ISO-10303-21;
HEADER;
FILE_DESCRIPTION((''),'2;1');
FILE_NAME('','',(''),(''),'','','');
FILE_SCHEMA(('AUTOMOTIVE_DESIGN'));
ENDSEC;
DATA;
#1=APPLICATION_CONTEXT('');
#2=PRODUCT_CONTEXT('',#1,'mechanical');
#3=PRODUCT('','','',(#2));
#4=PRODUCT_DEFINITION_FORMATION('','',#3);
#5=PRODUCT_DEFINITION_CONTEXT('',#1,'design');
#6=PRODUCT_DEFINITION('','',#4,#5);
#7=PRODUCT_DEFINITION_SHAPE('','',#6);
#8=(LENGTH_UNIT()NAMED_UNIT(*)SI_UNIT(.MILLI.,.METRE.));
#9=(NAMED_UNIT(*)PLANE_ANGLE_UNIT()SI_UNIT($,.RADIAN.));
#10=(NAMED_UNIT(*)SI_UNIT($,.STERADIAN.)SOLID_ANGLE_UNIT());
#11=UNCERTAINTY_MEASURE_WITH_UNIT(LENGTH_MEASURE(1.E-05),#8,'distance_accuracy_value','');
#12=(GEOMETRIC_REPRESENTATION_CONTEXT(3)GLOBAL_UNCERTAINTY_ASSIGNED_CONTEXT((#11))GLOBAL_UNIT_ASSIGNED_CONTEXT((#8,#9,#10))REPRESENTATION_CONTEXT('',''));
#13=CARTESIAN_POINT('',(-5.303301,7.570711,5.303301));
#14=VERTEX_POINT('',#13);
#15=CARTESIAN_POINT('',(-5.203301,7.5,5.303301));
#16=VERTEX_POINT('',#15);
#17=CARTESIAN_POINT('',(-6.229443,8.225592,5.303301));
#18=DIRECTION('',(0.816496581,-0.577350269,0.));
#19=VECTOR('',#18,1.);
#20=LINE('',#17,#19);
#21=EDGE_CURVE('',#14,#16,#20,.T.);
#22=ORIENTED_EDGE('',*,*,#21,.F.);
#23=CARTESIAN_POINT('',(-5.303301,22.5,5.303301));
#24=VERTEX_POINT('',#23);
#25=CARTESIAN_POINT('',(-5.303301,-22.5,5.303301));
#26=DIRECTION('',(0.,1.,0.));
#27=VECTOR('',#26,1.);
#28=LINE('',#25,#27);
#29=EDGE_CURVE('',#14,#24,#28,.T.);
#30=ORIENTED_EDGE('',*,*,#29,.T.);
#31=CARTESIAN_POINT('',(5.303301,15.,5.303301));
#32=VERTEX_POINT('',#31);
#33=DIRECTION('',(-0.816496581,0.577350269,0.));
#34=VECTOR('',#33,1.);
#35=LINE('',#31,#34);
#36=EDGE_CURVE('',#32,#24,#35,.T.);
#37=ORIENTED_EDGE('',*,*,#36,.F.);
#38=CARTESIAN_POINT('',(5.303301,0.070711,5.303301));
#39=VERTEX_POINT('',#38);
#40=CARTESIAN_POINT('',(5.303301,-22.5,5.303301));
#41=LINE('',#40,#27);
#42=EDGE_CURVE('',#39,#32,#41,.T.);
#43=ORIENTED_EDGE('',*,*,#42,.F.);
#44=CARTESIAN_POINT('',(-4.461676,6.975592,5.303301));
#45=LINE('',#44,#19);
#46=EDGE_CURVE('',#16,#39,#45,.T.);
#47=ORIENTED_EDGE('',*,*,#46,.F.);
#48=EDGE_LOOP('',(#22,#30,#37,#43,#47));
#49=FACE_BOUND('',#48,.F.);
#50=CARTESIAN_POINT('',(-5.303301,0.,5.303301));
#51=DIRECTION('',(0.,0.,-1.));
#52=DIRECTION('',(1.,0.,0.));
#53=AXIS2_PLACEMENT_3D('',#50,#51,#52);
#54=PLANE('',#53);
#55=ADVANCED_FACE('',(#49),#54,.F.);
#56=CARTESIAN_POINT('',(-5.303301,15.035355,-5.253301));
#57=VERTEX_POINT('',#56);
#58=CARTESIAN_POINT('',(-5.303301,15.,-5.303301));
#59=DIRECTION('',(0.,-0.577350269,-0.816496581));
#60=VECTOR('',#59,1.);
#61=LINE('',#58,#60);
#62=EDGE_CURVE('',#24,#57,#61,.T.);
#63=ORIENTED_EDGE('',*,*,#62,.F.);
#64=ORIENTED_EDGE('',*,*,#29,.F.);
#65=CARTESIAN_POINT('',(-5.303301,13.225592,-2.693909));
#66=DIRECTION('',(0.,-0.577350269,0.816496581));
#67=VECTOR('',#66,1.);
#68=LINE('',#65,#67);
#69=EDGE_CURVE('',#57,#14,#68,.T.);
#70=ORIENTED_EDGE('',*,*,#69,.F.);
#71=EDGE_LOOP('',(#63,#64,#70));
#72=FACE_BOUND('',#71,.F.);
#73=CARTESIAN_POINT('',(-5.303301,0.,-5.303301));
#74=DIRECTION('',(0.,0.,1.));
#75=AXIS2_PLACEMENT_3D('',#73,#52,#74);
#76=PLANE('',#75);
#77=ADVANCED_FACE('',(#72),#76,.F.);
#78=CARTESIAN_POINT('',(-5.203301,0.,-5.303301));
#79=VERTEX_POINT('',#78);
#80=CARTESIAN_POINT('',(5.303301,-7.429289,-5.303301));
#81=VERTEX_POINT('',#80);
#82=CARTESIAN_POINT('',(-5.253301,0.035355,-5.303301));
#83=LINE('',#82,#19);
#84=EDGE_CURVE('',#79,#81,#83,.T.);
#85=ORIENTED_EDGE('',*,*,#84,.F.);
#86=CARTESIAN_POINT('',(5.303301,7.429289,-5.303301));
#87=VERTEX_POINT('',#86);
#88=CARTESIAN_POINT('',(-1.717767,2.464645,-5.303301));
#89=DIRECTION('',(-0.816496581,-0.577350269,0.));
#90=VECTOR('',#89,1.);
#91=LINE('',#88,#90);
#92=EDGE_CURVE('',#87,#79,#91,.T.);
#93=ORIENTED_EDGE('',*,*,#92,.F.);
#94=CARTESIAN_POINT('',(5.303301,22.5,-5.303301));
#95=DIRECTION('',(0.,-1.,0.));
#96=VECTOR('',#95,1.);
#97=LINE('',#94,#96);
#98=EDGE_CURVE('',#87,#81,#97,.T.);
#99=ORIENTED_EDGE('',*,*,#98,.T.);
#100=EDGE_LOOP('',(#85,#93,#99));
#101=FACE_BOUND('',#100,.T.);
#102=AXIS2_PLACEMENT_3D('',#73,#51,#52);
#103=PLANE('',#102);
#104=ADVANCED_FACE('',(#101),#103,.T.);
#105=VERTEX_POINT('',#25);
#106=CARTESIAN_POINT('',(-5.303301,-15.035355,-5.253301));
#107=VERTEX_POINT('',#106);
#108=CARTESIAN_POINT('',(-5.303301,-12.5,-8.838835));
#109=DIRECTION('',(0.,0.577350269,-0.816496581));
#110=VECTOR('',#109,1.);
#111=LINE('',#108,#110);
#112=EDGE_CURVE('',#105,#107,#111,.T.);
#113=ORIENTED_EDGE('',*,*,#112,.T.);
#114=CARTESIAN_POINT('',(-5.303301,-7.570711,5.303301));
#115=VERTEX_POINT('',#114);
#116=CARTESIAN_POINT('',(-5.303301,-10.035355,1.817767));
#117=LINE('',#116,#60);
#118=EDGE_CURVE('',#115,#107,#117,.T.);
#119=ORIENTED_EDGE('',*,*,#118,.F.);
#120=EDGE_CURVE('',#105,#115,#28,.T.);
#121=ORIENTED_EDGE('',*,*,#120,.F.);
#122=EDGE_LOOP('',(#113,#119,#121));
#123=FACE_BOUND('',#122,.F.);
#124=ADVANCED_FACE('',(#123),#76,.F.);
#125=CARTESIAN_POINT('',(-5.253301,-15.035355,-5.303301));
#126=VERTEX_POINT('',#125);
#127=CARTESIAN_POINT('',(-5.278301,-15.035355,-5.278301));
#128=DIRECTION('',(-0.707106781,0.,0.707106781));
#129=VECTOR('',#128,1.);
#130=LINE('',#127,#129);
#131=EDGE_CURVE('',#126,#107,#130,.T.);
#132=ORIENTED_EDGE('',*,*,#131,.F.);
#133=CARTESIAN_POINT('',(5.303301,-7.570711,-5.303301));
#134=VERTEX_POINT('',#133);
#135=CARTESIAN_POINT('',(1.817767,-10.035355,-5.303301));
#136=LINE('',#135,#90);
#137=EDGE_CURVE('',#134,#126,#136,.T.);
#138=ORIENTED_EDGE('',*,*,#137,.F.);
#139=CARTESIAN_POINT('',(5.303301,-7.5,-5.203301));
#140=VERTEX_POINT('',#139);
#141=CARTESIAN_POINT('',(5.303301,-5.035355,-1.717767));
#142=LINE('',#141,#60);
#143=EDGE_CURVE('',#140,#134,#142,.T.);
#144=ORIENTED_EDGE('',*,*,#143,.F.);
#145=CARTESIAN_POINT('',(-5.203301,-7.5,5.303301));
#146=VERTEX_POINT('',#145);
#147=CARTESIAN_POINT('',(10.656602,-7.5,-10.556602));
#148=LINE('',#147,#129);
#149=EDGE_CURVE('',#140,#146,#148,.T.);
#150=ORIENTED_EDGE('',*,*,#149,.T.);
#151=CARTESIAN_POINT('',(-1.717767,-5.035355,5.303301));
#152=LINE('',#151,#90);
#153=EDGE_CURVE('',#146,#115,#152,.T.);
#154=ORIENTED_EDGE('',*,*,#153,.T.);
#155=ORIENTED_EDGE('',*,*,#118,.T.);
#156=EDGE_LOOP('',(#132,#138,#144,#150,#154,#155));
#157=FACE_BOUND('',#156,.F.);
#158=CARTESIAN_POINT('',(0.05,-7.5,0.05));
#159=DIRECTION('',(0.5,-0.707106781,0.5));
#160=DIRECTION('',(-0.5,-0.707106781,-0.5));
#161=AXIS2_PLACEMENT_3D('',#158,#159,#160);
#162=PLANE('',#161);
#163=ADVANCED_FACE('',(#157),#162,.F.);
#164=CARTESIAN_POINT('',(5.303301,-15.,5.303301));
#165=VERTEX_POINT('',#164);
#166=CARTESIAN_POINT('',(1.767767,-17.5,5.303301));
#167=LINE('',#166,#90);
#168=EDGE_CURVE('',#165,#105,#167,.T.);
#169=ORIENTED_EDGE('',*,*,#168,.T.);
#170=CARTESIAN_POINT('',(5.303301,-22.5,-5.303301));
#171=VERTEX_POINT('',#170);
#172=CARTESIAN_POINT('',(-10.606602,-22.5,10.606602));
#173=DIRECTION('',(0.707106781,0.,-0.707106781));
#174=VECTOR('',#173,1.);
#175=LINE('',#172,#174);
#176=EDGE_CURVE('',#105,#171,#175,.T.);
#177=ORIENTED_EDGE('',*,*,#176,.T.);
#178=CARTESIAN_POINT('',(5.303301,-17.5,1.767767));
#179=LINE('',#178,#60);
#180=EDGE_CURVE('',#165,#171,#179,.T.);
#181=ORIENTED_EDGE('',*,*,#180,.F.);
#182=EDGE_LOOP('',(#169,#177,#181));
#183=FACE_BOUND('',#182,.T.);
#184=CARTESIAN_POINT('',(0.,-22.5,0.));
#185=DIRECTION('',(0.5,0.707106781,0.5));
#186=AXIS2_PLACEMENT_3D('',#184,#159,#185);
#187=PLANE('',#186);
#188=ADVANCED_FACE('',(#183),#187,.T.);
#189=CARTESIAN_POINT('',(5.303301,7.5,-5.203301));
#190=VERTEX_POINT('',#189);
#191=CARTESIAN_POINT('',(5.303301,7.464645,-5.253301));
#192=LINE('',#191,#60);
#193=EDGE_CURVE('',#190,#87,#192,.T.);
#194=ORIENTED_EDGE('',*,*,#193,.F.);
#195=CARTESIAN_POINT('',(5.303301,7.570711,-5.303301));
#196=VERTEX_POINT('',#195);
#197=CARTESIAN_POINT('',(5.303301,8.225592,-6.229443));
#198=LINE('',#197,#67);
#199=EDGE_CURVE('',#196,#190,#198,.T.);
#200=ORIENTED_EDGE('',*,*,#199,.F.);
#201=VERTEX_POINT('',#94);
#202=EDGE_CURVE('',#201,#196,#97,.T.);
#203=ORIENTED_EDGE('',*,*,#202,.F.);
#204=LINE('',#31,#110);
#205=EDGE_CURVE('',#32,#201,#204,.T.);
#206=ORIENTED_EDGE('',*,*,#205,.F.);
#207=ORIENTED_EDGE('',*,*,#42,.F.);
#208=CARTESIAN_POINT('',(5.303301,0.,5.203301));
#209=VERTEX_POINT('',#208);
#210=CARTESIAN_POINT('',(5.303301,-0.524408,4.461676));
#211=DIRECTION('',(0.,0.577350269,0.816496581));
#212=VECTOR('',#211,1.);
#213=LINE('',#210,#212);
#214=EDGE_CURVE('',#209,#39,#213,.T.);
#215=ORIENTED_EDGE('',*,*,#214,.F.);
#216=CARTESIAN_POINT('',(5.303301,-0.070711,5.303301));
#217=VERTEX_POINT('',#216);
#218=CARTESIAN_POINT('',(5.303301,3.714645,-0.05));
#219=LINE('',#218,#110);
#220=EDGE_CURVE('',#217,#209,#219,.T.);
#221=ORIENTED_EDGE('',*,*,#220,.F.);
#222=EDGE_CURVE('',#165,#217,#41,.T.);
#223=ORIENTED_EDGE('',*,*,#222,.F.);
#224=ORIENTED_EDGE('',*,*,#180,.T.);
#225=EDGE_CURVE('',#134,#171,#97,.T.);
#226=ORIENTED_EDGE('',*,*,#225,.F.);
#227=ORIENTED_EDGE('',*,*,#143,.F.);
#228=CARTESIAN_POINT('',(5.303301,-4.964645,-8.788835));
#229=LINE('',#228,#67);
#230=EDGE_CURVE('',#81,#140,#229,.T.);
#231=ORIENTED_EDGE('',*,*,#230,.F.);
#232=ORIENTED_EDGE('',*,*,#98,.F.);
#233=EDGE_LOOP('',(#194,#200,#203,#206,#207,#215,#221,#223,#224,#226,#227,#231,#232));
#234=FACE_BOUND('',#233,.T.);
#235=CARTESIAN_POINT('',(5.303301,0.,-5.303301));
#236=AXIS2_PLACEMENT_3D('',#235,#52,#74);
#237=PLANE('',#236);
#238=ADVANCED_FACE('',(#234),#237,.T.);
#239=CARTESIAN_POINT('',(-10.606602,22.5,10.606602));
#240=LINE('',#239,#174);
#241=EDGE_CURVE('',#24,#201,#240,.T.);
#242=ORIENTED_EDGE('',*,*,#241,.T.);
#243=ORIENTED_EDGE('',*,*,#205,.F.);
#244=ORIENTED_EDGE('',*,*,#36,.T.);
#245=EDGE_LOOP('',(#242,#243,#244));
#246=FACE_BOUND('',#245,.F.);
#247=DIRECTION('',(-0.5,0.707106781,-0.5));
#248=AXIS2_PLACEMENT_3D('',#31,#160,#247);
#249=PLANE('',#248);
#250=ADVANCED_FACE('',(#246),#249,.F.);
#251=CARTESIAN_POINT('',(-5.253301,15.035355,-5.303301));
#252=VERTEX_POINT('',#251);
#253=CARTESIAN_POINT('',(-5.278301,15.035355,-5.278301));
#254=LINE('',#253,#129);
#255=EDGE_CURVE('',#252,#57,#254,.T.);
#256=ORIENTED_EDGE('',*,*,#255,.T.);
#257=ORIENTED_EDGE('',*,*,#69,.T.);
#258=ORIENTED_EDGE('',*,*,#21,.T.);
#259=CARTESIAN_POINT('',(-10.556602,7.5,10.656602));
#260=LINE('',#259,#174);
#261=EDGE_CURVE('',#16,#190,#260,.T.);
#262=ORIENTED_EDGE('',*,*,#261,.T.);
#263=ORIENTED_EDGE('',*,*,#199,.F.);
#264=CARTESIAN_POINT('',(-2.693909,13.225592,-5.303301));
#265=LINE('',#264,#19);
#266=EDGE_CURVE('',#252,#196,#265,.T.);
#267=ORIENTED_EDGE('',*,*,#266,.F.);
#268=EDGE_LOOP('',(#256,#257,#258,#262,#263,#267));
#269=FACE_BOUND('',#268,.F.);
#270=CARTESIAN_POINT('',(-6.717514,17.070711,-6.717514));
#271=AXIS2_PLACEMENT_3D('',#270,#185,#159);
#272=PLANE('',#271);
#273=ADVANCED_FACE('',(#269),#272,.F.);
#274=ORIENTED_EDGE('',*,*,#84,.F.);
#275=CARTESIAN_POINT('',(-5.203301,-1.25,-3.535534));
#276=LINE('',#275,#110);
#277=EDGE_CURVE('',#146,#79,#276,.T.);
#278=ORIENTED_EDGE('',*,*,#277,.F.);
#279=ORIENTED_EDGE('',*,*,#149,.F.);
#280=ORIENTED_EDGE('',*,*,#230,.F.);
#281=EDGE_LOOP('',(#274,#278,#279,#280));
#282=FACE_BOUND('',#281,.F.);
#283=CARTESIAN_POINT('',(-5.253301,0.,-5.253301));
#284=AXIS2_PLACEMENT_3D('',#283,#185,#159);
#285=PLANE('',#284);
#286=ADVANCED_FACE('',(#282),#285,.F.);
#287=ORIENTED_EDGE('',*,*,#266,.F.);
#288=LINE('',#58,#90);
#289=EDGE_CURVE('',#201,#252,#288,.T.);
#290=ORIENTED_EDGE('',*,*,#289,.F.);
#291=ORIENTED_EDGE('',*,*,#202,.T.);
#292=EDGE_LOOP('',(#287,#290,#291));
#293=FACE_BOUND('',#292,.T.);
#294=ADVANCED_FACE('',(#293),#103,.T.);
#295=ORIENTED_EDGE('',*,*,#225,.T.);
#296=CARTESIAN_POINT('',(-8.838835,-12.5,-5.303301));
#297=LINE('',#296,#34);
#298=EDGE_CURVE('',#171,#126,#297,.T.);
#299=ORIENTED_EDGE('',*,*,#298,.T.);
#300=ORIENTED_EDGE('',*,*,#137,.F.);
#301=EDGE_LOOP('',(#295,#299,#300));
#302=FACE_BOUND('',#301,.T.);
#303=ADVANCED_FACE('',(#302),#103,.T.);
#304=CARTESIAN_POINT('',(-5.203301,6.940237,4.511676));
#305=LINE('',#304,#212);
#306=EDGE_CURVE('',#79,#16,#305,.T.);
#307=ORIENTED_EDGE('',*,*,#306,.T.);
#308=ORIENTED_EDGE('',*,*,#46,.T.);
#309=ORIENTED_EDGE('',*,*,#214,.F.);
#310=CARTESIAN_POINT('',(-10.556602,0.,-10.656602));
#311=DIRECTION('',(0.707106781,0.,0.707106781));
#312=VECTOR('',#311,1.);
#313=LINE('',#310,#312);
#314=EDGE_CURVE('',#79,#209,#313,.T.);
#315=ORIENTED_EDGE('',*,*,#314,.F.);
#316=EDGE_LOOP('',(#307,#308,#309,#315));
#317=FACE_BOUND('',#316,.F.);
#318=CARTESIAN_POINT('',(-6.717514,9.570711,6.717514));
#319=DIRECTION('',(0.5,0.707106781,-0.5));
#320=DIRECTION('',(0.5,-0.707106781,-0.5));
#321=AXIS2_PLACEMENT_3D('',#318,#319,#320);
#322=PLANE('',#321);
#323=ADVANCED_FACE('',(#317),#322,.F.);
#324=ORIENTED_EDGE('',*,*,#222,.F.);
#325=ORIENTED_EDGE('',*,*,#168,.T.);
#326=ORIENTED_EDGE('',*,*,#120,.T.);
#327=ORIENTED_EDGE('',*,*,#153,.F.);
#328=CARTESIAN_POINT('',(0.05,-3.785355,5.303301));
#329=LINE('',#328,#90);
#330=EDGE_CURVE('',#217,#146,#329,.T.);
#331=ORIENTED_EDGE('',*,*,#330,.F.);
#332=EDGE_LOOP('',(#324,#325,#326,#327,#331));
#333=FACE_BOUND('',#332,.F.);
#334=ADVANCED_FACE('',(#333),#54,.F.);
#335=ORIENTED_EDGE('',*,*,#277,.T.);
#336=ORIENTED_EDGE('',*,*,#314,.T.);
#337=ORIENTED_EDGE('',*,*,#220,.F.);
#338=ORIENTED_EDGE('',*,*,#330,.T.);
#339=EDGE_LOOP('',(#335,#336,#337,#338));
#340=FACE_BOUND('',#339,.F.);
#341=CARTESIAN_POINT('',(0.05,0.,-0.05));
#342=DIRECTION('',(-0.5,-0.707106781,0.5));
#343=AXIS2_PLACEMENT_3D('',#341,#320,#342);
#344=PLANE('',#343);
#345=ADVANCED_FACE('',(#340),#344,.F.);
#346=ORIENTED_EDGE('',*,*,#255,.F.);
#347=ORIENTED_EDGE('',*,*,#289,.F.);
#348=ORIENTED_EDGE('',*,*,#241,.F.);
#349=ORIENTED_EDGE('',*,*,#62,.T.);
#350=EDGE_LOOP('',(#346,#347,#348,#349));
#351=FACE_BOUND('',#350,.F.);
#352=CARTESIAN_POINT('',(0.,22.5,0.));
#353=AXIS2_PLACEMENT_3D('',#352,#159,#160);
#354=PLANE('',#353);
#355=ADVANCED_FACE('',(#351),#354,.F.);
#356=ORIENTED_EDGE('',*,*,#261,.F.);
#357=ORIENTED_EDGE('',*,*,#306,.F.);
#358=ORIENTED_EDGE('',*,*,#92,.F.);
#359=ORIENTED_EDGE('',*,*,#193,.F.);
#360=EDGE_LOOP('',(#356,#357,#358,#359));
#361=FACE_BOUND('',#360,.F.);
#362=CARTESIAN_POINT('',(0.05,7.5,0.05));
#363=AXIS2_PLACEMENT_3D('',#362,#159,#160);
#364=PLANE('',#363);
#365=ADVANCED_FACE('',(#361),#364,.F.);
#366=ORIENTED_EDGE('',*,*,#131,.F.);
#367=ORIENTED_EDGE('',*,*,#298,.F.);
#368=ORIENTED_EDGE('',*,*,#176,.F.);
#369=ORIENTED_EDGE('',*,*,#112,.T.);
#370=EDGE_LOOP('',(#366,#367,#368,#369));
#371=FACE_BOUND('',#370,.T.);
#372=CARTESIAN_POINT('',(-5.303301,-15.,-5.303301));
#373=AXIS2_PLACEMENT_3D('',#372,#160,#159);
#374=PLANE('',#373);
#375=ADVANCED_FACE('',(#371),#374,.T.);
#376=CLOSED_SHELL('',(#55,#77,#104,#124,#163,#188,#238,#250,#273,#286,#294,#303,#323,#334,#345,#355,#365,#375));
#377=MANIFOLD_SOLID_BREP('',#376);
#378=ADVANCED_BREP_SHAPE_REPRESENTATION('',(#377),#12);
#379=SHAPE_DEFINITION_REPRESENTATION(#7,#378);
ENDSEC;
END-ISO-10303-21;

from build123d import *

# Parameters (mm, degrees)
F0_W      = 10.6066017178
F0_H      = 10.6066017178
F1_DEPTH  = 22.5
F4_DEPTH  = 15
F6_DEPTH  = 15
F9_DEPTH  = 15
F11_DEPTH = 15
F13_DEPTH = 15


# Not quite as in the source:
# - a feature names something its author has since deleted; it is built from what else it names


with BuildPart() as f1:
    # F0 (on Front) → F1 (new body, symmetric)
    with BuildSketch(Plane.XZ):
        Rectangle(F0_W, F0_H)
    extrude(amount=F1_DEPTH, both=True)

    # F3 (on 3pt) → F4 (cut, symmetric)
    with BuildSketch(Plane(origin=(0, 0, 0), x_dir=(0, 1, 0), z_dir=(0.7071067812, 0, -0.7071067812))):
        Polygon((-15, -7.5), (-22.5, 0), (-15, 7.5), (-15, 9.5), (-24.5, 9.5), (-24.5, -9.5), (-15, -9.5), align=None)
        Polygon((15, 7.5), (22.5, 0), (15, -7.5), (15, -9.5), (24.5, -9.5), (24.5, 9.5), (15, 9.5), align=None)
    extrude(amount=F4_DEPTH, both=True, mode=Mode.SUBTRACT)

    # F5 (on 3pt) → F6 (cut, symmetric)
    with BuildSketch(Plane(origin=(0, 0, 0), x_dir=(0, 1, 0), z_dir=(0.7071067812, 0, -0.7071067812))):
        Polygon((7.5, 0), (0, -7.5), (-7.5, 0), (-15, -7.5), (-15, -9.5), (15, -9.5), (15, -7.5), align=None)
    extrude(amount=F6_DEPTH, both=True, mode=Mode.SUBTRACT)

    # F8 (on 3pt) → F9 (cut, symmetric)
    with BuildSketch(Plane(origin=(0, 0, 0), x_dir=(0, -1, 0), z_dir=(-0.7071067812, 0, -0.7071067812))):
        Polygon((-7.5, 7.5), (0, 0), (7.5, 7.5), (7.5, 9.5), (-7.5, 9.5), align=None)
    extrude(amount=F9_DEPTH, both=True, mode=Mode.SUBTRACT)

    # F10 (on 3pt) → F11 (cut, symmetric)
    with BuildSketch(Plane(origin=(0, 0, 0), x_dir=(0, 1, 0), z_dir=(0.7071067812, 0, -0.7071067812))):
        Polygon((-17.0707106781, -9.5), (17.0707106781, -9.5), (7.5, 0.0707106781), (0, -7.4292893219), (-7.5, 0.0707106781), align=None)
    extrude(amount=F11_DEPTH, both=True, mode=Mode.SUBTRACT)

    # F12 (on 3pt) → F13 (cut, symmetric)
    with BuildSketch(Plane(origin=(0, 0, 0), x_dir=(0, -1, 0), z_dir=(-0.7071067812, 0, -0.7071067812))):
        Polygon((9.5707106781, 9.5), (-9.5707106781, 9.5), (0, -0.0707106781), align=None)
    extrude(amount=F13_DEPTH, both=True, mode=Mode.SUBTRACT)


solid = f1.part
